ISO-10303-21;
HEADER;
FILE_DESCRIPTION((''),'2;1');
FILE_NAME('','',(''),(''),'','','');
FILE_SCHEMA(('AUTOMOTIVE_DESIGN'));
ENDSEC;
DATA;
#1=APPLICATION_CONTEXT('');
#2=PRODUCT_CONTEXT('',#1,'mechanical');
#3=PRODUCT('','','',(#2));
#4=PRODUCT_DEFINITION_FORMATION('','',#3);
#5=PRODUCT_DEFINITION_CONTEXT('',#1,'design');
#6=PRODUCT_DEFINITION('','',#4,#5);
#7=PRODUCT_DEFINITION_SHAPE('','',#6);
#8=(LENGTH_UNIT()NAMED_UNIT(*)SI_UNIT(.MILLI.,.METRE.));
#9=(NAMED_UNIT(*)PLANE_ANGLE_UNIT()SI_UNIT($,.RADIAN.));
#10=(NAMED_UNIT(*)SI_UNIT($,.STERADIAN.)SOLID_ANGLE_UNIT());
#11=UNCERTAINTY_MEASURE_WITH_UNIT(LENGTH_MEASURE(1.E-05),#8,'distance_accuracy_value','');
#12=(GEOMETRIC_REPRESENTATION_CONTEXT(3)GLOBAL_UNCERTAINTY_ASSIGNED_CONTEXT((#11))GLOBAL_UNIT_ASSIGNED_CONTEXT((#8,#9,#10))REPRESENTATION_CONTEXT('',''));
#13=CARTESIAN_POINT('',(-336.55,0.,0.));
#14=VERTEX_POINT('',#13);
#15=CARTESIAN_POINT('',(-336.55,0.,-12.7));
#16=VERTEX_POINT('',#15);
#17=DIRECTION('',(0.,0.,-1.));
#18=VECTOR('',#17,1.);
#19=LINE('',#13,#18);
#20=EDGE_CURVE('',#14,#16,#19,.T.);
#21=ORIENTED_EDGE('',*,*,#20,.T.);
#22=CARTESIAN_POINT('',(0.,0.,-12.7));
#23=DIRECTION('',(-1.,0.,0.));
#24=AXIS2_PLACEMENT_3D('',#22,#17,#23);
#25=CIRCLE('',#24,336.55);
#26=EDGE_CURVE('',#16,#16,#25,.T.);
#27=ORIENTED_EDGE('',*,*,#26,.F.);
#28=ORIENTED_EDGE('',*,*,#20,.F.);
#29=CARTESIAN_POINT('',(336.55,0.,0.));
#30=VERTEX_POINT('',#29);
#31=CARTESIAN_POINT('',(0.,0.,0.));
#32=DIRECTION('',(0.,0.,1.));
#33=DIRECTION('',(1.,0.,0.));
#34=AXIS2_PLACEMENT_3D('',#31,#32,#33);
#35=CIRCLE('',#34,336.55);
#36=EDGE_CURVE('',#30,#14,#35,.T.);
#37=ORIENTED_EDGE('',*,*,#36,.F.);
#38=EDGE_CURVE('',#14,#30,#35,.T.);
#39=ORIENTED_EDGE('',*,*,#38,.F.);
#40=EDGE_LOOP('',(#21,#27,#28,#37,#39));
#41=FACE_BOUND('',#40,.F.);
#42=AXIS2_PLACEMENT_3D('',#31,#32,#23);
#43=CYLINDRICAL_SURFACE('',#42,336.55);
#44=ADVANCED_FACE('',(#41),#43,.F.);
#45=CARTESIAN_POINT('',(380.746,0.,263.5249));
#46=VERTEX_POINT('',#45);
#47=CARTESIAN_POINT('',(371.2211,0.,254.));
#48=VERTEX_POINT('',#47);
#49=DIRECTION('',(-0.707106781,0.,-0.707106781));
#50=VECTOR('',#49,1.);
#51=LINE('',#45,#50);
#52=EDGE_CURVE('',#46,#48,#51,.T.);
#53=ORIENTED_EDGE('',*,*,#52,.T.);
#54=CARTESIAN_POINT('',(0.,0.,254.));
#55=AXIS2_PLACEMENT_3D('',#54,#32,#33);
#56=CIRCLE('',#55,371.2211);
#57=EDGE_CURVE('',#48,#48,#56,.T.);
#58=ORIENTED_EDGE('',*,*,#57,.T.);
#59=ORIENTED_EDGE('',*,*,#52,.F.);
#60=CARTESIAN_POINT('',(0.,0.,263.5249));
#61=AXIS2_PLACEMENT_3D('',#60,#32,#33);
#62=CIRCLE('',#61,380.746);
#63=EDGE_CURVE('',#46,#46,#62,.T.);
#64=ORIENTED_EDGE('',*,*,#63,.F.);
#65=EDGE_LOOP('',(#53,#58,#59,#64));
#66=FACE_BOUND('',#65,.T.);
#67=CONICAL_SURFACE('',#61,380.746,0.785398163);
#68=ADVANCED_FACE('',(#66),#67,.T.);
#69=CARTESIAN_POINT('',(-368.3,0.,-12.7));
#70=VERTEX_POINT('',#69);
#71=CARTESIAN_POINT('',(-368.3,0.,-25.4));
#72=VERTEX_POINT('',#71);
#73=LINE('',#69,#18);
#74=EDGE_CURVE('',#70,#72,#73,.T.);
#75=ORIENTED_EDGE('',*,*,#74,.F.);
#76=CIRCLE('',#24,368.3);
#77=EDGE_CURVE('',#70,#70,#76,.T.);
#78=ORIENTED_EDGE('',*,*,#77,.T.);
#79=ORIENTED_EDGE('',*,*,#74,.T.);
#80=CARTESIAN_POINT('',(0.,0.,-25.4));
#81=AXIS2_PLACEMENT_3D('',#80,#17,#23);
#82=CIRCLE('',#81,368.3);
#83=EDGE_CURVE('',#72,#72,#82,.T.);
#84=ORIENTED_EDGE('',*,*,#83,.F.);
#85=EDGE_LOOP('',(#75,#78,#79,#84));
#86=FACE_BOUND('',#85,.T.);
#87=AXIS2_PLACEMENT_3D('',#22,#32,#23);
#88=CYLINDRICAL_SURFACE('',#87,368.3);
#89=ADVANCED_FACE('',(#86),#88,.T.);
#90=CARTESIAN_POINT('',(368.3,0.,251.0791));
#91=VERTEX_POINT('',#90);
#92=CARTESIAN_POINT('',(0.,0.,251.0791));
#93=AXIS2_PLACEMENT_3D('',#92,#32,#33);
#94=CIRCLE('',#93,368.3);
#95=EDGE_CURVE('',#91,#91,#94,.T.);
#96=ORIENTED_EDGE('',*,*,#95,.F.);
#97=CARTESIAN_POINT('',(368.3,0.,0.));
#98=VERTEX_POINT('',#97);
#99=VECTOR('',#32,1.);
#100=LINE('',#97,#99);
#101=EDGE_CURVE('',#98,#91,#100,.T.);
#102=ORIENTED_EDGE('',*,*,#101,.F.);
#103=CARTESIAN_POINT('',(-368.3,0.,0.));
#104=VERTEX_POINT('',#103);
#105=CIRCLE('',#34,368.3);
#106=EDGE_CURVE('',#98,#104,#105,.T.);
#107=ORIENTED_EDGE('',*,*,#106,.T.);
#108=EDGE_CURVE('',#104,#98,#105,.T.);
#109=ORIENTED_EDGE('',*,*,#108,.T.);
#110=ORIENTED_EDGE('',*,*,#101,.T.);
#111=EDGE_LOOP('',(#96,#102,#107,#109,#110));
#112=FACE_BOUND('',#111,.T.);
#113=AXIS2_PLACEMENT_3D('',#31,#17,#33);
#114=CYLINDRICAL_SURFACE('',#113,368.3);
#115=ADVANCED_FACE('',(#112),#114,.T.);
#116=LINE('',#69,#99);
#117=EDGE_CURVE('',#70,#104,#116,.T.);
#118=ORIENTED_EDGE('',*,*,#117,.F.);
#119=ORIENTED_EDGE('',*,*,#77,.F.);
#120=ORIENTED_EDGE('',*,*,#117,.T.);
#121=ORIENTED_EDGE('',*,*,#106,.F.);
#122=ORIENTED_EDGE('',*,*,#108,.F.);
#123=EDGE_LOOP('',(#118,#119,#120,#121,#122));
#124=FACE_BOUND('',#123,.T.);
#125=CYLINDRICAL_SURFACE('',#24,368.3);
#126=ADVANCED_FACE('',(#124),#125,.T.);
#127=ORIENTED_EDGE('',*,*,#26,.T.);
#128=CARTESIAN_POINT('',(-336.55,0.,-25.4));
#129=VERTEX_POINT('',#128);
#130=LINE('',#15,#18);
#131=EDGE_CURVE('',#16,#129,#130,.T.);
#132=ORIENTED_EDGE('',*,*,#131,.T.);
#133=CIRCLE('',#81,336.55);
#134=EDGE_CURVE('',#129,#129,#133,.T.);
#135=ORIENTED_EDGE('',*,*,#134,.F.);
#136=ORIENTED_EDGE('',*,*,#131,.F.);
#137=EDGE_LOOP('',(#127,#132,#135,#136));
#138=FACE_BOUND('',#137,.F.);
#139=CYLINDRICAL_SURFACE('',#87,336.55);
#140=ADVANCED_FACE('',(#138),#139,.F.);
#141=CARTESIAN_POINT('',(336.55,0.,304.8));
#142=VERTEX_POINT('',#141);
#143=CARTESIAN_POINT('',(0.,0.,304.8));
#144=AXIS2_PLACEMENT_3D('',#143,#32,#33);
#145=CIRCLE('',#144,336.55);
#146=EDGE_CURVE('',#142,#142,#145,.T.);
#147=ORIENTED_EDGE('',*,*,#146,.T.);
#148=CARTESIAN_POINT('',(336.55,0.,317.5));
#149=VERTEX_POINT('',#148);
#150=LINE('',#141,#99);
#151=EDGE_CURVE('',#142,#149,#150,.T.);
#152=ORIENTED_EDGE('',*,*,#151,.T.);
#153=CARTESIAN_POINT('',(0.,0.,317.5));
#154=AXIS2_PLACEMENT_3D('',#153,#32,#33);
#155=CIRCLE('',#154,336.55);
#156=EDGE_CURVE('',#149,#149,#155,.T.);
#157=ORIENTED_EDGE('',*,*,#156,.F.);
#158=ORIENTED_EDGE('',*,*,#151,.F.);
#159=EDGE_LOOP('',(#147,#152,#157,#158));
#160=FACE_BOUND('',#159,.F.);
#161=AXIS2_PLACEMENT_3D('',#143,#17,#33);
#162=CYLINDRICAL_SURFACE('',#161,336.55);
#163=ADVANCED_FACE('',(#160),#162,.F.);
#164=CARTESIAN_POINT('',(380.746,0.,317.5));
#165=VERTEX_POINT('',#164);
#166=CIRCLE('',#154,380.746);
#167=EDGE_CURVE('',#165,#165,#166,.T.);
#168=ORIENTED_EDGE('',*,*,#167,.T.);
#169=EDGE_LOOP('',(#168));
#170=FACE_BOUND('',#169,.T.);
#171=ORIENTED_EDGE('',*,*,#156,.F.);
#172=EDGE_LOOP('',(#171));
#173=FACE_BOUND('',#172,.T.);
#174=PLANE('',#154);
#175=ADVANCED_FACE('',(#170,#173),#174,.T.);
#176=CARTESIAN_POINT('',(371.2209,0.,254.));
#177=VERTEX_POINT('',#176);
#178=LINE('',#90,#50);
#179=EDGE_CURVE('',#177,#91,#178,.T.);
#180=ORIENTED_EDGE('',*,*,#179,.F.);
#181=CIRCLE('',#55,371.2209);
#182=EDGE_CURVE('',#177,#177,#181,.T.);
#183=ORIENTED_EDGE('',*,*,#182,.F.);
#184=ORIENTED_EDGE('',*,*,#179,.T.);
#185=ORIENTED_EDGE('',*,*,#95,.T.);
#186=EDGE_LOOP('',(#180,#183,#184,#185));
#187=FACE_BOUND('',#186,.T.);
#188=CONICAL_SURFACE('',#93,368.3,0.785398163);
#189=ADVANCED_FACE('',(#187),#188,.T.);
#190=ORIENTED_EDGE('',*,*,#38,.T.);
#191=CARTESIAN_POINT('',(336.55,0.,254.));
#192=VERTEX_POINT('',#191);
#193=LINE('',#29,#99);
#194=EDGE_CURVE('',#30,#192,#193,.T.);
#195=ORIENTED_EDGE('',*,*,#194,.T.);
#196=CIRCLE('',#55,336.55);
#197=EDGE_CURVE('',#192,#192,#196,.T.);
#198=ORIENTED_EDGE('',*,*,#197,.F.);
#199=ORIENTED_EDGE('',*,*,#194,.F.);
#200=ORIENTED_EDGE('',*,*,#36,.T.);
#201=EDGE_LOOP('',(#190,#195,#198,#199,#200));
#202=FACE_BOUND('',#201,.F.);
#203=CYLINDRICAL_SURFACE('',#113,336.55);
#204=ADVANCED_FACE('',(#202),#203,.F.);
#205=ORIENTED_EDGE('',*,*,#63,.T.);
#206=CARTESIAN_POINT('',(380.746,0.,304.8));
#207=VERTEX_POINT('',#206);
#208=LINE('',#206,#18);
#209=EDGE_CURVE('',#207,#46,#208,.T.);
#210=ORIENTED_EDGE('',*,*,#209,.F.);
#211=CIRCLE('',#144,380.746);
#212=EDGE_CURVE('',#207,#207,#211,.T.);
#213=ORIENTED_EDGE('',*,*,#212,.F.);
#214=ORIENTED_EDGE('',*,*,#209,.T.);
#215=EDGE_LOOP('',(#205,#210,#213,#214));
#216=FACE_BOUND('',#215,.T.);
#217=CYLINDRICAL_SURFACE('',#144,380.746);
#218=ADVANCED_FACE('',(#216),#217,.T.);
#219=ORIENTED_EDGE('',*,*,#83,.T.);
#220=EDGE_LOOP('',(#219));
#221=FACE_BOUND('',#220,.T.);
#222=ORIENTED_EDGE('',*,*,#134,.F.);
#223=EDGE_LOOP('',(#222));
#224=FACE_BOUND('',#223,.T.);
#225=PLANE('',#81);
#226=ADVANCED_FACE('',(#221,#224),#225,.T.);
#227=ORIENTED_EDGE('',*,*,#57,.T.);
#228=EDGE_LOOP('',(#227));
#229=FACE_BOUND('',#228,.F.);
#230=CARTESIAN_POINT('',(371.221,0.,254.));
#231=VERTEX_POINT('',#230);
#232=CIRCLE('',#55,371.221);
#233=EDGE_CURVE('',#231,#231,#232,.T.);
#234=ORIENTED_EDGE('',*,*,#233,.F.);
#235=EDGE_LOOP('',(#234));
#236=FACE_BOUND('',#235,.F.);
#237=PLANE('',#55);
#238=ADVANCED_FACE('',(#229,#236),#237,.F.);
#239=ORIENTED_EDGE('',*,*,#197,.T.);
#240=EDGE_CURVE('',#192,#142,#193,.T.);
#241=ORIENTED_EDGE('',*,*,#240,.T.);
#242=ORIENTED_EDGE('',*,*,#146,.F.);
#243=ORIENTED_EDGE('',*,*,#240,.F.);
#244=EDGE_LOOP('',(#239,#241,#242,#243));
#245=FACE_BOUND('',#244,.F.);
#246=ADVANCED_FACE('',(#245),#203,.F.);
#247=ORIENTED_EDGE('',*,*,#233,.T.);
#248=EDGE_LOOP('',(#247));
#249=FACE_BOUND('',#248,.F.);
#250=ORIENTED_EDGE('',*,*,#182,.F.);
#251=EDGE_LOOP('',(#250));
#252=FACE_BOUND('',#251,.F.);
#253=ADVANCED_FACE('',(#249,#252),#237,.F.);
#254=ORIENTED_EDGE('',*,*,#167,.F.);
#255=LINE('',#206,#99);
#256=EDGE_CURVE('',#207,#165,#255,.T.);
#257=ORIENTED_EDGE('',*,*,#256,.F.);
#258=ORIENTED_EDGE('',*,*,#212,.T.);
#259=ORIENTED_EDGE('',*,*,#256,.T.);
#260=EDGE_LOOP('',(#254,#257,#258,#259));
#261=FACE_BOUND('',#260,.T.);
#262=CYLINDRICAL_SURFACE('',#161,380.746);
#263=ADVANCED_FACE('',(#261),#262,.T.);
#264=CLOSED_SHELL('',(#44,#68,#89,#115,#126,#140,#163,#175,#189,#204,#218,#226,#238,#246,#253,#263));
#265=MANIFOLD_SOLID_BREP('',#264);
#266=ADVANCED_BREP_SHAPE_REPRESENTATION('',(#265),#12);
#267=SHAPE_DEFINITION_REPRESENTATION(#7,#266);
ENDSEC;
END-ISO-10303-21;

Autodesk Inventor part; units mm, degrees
ref_plane "YZ Plane" through (0, 0, 0) normal (1, 0, 0) x (0, 1, 0)
ref_plane "XZ Plane" through (0, 0, 0) normal (0, 1, 0) x (-1, 0, 0)
ref_plane "XY Plane" through (0, 0, 0) normal (0, 0, 1) x (1, 0, 0)
sketch "Sketch1" plane through (0, 0, 0) normal (0, 0, 1) x (1, 0, 0)
  circle A0 centre (0, 0) radius 336.55
  circle A1 centre (0, 0) radius 368.3
  dimension "d0" = 673.1
  dimension "d1" = 736.6
extrude "Extrusion1" add sketch "Sketch1" along normal blind 304.8
sketch "Sketch2" plane through (0, 0, 304.8) normal (0, 0, 1) x (1, 0, 0)
  circle A0 centre (0, 0) radius 368.3 projected
  circle A1 centre (0, 0) radius 371.221
  circle A2 centre (0, 0) radius 374.396
  dimension "d4" = 742.442
  dimension "d5" = 748.792
extrude "Extrusion2" add sketch "Sketch2" against normal blind 50.8 contours A1
extrude "Extrusion3" add sketch "Sketch2" against normal blind 25.4 contours A2
chamfer "Chamfer1" distance 2.921 angle 45 1 edges at (-368.3, 0, 254)
sketch "Sketch3" plane through (0, 0, 0) normal (0, 0, -1) x (-1, 0, 0)
  circle A0 centre (0, 0) radius 355.346
  circle A1 centre (0, 0) radius 336.55 projected
  dimension "d13" = 710.692
extrude "Extrusion4" add sketch "Sketch3" along normal blind 12.7
fillet "Fillet1" radius 0.7937 2 edges at (355.346, 0, 0) (-371.221, 0, 279.4)
chamfer "Chamfer2" distance 0.7937 angle 45 1 edges at (355.346, 0, -12.7)
chamfer "Chamfer3" distance 0.7937 angle 45 1 edges at (-374.396, 0, 279.4)
sketch "Sketch4" plane through (0, 0, 0) normal (1, 0, 0) x (0, 1, 0)
  line L0 (371.221, 278.6063) -> (371.221, 254) construction
  line L1 (-374.396, 304.8) -> (374.396, 304.8) construction
  line L2 (371.221, 273.05) -> (369.4409, 271.2699)
  arc A0 (369.4409, 271.2699) -> (368.046, 267.9023) centre (372.8085, 267.9023) ccw
  line L3 (368.046, 267.9023) -> (368.046, 267.0852)
  arc A1 (368.046, 267.0852) -> (369.4409, 263.7176) centre (372.8085, 267.0852) ccw
  line L4 (369.4409, 263.7176) -> (371.221, 261.9375)
  line L5 (371.221, 261.9375) -> (371.221, 273.05)
  line L6 (0, -76.2) -> (0, 368.3) projected
  point P0 (0, 0)
  dimension "d23" = 11.1125
  dimension "d24" = 3.175
  dimension "d25" = 4.7625
  dimension "d26" = 31.75
  dimension "d27" = 45
revolve "Revolution1" cut sketch "Sketch4" angle 360 about axis through (0, 0, -10) along (0, 0, 1)
sketch "Sketch5" plane through (0, 0, -12.7) normal (0, 0, -1) x (-1, 0, 0)
  circle A0 centre (0, 0) radius 336.55 projected
  circle A1 centre (0, 0) radius 368.3 projected
extrude "Extrusion5" add sketch "Sketch5" along normal blind 12.7 and the other way blind 12.7
sketch "Sketch6" plane through (0, 0, 304.8) normal (0, 0, 1) x (1, 0, 0)
  circle A0 centre (0, 0) radius 374.396 projected
  circle A1 centre (0, 0) radius 336.55 projected
  circle A2 centre (0, 0) radius 380.746
  dimension "d33" = 6.35
extrude "Extrusion6" add sketch "Sketch6" along normal blind 12.7 and the other way blind 50.8 contours A0 | A2
chamfer "Chamfer6" distance 9.525 angle 45 1 edges at (-380.746, 0, 254)
equation "\"d10\" = -0.5 * d1 + 0.5 * d4"
properties part number "A1-19037-100-06 HCWI liner - pup - as cast" material "Iron, HCWI"
